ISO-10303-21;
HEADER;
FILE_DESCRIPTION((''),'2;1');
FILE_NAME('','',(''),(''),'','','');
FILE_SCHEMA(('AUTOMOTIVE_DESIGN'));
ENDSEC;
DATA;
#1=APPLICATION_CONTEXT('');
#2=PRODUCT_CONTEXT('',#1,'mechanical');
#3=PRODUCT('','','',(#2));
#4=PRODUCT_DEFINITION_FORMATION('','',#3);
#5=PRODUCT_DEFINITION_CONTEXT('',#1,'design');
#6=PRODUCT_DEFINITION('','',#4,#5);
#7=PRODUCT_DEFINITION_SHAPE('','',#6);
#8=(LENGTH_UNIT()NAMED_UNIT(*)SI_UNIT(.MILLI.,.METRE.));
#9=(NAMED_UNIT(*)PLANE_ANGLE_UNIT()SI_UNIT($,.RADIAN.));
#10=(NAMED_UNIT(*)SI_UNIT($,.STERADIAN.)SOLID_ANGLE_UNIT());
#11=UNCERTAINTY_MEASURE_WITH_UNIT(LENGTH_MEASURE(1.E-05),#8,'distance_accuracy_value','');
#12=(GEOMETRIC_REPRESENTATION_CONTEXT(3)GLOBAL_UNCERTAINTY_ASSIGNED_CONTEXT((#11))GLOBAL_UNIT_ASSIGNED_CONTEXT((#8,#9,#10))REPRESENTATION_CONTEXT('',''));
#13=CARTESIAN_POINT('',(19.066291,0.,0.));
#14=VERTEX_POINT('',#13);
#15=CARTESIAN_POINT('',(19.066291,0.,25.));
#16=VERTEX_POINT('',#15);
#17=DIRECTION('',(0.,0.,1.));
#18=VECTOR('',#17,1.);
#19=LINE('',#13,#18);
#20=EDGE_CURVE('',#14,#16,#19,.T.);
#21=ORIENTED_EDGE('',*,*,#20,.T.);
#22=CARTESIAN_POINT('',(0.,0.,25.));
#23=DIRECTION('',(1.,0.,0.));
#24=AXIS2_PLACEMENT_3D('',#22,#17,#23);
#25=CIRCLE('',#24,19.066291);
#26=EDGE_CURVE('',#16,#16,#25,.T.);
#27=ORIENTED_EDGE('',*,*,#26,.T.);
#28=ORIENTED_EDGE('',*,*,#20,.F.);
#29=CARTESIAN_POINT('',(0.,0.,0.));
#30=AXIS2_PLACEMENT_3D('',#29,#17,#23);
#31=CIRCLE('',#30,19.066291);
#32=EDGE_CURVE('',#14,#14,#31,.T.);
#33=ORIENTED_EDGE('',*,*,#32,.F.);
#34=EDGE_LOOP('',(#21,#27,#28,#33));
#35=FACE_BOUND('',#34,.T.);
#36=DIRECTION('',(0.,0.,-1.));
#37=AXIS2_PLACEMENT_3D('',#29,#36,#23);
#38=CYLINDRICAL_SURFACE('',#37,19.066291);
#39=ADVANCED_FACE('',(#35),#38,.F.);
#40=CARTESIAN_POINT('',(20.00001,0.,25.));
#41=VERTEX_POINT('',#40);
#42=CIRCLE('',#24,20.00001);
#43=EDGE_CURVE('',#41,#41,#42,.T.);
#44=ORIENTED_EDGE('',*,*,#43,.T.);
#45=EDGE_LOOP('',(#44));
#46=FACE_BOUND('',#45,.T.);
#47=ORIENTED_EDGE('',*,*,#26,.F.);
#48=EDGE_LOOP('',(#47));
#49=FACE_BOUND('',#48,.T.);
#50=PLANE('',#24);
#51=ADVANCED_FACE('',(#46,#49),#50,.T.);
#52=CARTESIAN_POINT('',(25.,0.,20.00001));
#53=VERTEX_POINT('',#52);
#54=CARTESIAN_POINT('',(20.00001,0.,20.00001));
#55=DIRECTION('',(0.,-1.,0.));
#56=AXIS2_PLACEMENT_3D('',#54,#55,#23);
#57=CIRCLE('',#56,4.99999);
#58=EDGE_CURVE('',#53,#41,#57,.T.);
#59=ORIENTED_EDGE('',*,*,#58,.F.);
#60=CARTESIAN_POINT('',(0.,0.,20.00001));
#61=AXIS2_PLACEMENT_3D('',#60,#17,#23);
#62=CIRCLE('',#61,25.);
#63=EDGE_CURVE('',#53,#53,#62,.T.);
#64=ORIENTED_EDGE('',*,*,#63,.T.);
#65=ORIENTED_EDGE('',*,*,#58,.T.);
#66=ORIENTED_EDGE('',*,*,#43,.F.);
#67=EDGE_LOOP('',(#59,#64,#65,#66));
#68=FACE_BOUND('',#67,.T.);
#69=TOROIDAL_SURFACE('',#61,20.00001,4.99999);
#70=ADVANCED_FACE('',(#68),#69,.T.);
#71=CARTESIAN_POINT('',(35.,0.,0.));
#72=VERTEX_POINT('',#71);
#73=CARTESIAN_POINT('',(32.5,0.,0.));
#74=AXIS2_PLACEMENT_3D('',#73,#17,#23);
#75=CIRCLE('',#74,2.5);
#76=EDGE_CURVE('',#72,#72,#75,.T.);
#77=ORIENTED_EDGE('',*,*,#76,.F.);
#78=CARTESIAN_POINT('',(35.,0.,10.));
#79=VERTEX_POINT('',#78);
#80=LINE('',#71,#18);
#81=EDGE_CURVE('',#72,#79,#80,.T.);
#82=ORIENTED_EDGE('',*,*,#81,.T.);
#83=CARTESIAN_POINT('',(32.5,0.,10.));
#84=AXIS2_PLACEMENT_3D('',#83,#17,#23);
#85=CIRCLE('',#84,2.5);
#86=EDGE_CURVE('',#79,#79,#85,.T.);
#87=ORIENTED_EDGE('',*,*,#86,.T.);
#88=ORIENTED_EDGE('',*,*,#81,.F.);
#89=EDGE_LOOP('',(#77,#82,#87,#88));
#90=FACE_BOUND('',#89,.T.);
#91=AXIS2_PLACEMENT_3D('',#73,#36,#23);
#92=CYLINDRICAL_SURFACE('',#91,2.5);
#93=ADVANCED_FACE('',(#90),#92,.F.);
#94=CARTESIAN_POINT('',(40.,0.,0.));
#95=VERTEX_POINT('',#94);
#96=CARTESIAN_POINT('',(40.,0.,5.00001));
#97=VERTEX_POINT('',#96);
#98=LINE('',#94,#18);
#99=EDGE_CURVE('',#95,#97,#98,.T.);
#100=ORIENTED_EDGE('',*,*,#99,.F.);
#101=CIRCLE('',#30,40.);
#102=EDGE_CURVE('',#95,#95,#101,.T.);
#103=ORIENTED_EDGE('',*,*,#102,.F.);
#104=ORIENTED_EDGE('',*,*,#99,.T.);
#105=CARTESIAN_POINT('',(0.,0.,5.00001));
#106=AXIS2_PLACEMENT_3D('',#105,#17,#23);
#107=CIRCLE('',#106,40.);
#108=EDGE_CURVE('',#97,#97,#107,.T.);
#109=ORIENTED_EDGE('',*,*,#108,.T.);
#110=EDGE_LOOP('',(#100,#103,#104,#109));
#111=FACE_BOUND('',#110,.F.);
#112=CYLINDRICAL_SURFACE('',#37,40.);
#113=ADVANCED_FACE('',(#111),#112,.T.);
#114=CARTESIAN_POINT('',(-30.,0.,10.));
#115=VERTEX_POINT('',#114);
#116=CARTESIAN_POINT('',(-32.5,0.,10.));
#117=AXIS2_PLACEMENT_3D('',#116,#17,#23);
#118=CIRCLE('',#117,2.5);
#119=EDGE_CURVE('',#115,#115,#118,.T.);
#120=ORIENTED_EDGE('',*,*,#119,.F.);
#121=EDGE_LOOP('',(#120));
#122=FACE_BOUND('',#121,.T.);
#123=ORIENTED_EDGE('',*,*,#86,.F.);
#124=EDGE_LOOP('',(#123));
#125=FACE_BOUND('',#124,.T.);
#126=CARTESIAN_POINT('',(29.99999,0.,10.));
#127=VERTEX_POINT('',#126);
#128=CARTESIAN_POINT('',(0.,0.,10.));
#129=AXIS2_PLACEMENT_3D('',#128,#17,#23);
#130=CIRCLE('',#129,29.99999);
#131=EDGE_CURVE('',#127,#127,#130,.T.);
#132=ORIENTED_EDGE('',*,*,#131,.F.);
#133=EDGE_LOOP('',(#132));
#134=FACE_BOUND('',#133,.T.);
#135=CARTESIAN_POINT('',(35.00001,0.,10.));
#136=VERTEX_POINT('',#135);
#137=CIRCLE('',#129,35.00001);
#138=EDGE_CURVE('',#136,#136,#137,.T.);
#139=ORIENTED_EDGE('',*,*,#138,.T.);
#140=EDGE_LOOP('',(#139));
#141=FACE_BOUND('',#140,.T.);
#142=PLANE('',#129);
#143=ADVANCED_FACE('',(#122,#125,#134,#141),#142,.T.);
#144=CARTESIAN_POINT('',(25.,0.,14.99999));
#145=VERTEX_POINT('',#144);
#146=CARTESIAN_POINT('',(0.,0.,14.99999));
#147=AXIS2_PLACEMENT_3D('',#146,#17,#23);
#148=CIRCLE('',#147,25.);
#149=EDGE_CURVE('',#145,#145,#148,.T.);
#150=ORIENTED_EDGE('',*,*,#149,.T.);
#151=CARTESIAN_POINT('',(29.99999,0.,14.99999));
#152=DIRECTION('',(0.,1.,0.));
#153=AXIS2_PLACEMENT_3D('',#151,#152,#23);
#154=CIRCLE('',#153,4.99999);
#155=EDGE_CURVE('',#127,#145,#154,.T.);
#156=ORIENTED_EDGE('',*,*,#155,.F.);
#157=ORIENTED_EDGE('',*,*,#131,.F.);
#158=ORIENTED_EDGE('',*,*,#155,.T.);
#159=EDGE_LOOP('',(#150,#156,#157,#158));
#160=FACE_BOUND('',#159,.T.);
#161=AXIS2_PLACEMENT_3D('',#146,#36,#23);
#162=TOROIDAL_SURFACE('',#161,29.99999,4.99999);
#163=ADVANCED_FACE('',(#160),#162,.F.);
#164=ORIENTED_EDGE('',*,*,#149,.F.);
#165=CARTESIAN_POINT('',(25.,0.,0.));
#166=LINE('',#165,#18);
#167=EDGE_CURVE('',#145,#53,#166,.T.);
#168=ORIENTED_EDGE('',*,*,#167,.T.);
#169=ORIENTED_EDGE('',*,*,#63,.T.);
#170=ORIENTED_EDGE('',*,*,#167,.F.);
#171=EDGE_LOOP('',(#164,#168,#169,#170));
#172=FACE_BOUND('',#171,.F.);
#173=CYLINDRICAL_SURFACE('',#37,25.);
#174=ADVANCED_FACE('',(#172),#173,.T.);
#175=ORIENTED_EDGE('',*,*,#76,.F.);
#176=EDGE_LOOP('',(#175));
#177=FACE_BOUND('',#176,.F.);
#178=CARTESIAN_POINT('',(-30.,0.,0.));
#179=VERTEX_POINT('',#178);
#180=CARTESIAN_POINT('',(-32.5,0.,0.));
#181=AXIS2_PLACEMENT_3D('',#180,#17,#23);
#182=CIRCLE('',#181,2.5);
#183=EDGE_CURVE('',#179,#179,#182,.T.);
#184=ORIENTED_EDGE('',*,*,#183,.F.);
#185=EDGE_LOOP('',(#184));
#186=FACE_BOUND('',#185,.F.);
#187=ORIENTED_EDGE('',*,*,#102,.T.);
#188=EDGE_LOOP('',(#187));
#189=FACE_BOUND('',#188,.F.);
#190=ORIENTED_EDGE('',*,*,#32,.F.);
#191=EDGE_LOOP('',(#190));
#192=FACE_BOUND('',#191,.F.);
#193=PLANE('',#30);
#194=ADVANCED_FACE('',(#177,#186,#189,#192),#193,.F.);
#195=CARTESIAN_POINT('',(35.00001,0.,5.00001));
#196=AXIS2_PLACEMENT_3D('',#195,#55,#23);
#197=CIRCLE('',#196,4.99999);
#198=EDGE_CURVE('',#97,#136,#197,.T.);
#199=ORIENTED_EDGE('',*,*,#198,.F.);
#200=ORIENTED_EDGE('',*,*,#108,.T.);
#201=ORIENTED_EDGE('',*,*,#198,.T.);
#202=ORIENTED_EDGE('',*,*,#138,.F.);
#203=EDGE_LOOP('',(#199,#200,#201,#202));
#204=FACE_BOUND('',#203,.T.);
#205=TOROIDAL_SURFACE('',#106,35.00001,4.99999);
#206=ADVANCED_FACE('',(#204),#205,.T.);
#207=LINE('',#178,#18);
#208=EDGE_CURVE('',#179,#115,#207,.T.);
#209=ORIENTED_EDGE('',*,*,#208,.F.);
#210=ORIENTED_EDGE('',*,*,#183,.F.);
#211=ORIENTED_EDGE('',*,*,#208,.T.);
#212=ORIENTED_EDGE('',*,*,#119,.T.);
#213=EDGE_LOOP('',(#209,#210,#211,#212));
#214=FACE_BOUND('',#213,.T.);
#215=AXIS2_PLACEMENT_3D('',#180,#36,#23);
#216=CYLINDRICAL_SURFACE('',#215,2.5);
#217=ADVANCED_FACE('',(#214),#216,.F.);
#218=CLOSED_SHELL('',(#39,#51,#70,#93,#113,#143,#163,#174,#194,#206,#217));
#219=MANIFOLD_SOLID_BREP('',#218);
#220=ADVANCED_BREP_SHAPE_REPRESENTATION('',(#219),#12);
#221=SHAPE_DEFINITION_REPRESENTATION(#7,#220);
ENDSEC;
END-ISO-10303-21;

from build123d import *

# Parameters (mm, degrees)
F0_R     = 25
F0_R_2   = 19.066290696
F1_DEPTH = 25
F0_R_3   = 40
F0_R_4   = 2.5
F2_DEPTH = 10
F3_R     = 4.99999
F4_R     = 4.99999


# Not quite as in the source:
# - a fillet or chamfer is up to 0.001 mm smaller than in the source, because OpenCascade refuses the exact size


with BuildPart() as f1:
    # F0 (on Top) → F1 (new body)
    with BuildSketch(Plane.XY):
        Circle(F0_R)
        Circle(F0_R_2, mode=Mode.SUBTRACT)
    extrude(amount=F1_DEPTH)

    # F0 (on Top) → F2 (join)
    with BuildSketch(Plane.XY):
        Circle(F0_R_3)
        with Locations((-32.5, 0)):
            Circle(F0_R_4, mode=Mode.SUBTRACT)
        Circle(F0_R, mode=Mode.SUBTRACT)
        with Locations((32.5, 0)):
            Circle(F0_R_4, mode=Mode.SUBTRACT)
    extrude(amount=F2_DEPTH)

    # F3 (radius 5 in the source; OpenCascade refuses exactly that, so slightly less here)
    f3_edges = [f1.edges().sort_by_distance(p)[0] for p in [
        (-40, 0, 10),
        (-25, 0, 25),
    ]]
    fillet(f3_edges, radius=F3_R)

    # F4 (radius 5 in the source; OpenCascade refuses exactly that, so slightly less here)
    f4_edges = [f1.edges().sort_by_distance(p)[0] for p in [
        (25, 0, 15.000005),
        (-25, 0, 20.00001),
        (-25, 0, 10),
    ]]
    fillet(f4_edges, radius=F4_R)


solid = f1.part
